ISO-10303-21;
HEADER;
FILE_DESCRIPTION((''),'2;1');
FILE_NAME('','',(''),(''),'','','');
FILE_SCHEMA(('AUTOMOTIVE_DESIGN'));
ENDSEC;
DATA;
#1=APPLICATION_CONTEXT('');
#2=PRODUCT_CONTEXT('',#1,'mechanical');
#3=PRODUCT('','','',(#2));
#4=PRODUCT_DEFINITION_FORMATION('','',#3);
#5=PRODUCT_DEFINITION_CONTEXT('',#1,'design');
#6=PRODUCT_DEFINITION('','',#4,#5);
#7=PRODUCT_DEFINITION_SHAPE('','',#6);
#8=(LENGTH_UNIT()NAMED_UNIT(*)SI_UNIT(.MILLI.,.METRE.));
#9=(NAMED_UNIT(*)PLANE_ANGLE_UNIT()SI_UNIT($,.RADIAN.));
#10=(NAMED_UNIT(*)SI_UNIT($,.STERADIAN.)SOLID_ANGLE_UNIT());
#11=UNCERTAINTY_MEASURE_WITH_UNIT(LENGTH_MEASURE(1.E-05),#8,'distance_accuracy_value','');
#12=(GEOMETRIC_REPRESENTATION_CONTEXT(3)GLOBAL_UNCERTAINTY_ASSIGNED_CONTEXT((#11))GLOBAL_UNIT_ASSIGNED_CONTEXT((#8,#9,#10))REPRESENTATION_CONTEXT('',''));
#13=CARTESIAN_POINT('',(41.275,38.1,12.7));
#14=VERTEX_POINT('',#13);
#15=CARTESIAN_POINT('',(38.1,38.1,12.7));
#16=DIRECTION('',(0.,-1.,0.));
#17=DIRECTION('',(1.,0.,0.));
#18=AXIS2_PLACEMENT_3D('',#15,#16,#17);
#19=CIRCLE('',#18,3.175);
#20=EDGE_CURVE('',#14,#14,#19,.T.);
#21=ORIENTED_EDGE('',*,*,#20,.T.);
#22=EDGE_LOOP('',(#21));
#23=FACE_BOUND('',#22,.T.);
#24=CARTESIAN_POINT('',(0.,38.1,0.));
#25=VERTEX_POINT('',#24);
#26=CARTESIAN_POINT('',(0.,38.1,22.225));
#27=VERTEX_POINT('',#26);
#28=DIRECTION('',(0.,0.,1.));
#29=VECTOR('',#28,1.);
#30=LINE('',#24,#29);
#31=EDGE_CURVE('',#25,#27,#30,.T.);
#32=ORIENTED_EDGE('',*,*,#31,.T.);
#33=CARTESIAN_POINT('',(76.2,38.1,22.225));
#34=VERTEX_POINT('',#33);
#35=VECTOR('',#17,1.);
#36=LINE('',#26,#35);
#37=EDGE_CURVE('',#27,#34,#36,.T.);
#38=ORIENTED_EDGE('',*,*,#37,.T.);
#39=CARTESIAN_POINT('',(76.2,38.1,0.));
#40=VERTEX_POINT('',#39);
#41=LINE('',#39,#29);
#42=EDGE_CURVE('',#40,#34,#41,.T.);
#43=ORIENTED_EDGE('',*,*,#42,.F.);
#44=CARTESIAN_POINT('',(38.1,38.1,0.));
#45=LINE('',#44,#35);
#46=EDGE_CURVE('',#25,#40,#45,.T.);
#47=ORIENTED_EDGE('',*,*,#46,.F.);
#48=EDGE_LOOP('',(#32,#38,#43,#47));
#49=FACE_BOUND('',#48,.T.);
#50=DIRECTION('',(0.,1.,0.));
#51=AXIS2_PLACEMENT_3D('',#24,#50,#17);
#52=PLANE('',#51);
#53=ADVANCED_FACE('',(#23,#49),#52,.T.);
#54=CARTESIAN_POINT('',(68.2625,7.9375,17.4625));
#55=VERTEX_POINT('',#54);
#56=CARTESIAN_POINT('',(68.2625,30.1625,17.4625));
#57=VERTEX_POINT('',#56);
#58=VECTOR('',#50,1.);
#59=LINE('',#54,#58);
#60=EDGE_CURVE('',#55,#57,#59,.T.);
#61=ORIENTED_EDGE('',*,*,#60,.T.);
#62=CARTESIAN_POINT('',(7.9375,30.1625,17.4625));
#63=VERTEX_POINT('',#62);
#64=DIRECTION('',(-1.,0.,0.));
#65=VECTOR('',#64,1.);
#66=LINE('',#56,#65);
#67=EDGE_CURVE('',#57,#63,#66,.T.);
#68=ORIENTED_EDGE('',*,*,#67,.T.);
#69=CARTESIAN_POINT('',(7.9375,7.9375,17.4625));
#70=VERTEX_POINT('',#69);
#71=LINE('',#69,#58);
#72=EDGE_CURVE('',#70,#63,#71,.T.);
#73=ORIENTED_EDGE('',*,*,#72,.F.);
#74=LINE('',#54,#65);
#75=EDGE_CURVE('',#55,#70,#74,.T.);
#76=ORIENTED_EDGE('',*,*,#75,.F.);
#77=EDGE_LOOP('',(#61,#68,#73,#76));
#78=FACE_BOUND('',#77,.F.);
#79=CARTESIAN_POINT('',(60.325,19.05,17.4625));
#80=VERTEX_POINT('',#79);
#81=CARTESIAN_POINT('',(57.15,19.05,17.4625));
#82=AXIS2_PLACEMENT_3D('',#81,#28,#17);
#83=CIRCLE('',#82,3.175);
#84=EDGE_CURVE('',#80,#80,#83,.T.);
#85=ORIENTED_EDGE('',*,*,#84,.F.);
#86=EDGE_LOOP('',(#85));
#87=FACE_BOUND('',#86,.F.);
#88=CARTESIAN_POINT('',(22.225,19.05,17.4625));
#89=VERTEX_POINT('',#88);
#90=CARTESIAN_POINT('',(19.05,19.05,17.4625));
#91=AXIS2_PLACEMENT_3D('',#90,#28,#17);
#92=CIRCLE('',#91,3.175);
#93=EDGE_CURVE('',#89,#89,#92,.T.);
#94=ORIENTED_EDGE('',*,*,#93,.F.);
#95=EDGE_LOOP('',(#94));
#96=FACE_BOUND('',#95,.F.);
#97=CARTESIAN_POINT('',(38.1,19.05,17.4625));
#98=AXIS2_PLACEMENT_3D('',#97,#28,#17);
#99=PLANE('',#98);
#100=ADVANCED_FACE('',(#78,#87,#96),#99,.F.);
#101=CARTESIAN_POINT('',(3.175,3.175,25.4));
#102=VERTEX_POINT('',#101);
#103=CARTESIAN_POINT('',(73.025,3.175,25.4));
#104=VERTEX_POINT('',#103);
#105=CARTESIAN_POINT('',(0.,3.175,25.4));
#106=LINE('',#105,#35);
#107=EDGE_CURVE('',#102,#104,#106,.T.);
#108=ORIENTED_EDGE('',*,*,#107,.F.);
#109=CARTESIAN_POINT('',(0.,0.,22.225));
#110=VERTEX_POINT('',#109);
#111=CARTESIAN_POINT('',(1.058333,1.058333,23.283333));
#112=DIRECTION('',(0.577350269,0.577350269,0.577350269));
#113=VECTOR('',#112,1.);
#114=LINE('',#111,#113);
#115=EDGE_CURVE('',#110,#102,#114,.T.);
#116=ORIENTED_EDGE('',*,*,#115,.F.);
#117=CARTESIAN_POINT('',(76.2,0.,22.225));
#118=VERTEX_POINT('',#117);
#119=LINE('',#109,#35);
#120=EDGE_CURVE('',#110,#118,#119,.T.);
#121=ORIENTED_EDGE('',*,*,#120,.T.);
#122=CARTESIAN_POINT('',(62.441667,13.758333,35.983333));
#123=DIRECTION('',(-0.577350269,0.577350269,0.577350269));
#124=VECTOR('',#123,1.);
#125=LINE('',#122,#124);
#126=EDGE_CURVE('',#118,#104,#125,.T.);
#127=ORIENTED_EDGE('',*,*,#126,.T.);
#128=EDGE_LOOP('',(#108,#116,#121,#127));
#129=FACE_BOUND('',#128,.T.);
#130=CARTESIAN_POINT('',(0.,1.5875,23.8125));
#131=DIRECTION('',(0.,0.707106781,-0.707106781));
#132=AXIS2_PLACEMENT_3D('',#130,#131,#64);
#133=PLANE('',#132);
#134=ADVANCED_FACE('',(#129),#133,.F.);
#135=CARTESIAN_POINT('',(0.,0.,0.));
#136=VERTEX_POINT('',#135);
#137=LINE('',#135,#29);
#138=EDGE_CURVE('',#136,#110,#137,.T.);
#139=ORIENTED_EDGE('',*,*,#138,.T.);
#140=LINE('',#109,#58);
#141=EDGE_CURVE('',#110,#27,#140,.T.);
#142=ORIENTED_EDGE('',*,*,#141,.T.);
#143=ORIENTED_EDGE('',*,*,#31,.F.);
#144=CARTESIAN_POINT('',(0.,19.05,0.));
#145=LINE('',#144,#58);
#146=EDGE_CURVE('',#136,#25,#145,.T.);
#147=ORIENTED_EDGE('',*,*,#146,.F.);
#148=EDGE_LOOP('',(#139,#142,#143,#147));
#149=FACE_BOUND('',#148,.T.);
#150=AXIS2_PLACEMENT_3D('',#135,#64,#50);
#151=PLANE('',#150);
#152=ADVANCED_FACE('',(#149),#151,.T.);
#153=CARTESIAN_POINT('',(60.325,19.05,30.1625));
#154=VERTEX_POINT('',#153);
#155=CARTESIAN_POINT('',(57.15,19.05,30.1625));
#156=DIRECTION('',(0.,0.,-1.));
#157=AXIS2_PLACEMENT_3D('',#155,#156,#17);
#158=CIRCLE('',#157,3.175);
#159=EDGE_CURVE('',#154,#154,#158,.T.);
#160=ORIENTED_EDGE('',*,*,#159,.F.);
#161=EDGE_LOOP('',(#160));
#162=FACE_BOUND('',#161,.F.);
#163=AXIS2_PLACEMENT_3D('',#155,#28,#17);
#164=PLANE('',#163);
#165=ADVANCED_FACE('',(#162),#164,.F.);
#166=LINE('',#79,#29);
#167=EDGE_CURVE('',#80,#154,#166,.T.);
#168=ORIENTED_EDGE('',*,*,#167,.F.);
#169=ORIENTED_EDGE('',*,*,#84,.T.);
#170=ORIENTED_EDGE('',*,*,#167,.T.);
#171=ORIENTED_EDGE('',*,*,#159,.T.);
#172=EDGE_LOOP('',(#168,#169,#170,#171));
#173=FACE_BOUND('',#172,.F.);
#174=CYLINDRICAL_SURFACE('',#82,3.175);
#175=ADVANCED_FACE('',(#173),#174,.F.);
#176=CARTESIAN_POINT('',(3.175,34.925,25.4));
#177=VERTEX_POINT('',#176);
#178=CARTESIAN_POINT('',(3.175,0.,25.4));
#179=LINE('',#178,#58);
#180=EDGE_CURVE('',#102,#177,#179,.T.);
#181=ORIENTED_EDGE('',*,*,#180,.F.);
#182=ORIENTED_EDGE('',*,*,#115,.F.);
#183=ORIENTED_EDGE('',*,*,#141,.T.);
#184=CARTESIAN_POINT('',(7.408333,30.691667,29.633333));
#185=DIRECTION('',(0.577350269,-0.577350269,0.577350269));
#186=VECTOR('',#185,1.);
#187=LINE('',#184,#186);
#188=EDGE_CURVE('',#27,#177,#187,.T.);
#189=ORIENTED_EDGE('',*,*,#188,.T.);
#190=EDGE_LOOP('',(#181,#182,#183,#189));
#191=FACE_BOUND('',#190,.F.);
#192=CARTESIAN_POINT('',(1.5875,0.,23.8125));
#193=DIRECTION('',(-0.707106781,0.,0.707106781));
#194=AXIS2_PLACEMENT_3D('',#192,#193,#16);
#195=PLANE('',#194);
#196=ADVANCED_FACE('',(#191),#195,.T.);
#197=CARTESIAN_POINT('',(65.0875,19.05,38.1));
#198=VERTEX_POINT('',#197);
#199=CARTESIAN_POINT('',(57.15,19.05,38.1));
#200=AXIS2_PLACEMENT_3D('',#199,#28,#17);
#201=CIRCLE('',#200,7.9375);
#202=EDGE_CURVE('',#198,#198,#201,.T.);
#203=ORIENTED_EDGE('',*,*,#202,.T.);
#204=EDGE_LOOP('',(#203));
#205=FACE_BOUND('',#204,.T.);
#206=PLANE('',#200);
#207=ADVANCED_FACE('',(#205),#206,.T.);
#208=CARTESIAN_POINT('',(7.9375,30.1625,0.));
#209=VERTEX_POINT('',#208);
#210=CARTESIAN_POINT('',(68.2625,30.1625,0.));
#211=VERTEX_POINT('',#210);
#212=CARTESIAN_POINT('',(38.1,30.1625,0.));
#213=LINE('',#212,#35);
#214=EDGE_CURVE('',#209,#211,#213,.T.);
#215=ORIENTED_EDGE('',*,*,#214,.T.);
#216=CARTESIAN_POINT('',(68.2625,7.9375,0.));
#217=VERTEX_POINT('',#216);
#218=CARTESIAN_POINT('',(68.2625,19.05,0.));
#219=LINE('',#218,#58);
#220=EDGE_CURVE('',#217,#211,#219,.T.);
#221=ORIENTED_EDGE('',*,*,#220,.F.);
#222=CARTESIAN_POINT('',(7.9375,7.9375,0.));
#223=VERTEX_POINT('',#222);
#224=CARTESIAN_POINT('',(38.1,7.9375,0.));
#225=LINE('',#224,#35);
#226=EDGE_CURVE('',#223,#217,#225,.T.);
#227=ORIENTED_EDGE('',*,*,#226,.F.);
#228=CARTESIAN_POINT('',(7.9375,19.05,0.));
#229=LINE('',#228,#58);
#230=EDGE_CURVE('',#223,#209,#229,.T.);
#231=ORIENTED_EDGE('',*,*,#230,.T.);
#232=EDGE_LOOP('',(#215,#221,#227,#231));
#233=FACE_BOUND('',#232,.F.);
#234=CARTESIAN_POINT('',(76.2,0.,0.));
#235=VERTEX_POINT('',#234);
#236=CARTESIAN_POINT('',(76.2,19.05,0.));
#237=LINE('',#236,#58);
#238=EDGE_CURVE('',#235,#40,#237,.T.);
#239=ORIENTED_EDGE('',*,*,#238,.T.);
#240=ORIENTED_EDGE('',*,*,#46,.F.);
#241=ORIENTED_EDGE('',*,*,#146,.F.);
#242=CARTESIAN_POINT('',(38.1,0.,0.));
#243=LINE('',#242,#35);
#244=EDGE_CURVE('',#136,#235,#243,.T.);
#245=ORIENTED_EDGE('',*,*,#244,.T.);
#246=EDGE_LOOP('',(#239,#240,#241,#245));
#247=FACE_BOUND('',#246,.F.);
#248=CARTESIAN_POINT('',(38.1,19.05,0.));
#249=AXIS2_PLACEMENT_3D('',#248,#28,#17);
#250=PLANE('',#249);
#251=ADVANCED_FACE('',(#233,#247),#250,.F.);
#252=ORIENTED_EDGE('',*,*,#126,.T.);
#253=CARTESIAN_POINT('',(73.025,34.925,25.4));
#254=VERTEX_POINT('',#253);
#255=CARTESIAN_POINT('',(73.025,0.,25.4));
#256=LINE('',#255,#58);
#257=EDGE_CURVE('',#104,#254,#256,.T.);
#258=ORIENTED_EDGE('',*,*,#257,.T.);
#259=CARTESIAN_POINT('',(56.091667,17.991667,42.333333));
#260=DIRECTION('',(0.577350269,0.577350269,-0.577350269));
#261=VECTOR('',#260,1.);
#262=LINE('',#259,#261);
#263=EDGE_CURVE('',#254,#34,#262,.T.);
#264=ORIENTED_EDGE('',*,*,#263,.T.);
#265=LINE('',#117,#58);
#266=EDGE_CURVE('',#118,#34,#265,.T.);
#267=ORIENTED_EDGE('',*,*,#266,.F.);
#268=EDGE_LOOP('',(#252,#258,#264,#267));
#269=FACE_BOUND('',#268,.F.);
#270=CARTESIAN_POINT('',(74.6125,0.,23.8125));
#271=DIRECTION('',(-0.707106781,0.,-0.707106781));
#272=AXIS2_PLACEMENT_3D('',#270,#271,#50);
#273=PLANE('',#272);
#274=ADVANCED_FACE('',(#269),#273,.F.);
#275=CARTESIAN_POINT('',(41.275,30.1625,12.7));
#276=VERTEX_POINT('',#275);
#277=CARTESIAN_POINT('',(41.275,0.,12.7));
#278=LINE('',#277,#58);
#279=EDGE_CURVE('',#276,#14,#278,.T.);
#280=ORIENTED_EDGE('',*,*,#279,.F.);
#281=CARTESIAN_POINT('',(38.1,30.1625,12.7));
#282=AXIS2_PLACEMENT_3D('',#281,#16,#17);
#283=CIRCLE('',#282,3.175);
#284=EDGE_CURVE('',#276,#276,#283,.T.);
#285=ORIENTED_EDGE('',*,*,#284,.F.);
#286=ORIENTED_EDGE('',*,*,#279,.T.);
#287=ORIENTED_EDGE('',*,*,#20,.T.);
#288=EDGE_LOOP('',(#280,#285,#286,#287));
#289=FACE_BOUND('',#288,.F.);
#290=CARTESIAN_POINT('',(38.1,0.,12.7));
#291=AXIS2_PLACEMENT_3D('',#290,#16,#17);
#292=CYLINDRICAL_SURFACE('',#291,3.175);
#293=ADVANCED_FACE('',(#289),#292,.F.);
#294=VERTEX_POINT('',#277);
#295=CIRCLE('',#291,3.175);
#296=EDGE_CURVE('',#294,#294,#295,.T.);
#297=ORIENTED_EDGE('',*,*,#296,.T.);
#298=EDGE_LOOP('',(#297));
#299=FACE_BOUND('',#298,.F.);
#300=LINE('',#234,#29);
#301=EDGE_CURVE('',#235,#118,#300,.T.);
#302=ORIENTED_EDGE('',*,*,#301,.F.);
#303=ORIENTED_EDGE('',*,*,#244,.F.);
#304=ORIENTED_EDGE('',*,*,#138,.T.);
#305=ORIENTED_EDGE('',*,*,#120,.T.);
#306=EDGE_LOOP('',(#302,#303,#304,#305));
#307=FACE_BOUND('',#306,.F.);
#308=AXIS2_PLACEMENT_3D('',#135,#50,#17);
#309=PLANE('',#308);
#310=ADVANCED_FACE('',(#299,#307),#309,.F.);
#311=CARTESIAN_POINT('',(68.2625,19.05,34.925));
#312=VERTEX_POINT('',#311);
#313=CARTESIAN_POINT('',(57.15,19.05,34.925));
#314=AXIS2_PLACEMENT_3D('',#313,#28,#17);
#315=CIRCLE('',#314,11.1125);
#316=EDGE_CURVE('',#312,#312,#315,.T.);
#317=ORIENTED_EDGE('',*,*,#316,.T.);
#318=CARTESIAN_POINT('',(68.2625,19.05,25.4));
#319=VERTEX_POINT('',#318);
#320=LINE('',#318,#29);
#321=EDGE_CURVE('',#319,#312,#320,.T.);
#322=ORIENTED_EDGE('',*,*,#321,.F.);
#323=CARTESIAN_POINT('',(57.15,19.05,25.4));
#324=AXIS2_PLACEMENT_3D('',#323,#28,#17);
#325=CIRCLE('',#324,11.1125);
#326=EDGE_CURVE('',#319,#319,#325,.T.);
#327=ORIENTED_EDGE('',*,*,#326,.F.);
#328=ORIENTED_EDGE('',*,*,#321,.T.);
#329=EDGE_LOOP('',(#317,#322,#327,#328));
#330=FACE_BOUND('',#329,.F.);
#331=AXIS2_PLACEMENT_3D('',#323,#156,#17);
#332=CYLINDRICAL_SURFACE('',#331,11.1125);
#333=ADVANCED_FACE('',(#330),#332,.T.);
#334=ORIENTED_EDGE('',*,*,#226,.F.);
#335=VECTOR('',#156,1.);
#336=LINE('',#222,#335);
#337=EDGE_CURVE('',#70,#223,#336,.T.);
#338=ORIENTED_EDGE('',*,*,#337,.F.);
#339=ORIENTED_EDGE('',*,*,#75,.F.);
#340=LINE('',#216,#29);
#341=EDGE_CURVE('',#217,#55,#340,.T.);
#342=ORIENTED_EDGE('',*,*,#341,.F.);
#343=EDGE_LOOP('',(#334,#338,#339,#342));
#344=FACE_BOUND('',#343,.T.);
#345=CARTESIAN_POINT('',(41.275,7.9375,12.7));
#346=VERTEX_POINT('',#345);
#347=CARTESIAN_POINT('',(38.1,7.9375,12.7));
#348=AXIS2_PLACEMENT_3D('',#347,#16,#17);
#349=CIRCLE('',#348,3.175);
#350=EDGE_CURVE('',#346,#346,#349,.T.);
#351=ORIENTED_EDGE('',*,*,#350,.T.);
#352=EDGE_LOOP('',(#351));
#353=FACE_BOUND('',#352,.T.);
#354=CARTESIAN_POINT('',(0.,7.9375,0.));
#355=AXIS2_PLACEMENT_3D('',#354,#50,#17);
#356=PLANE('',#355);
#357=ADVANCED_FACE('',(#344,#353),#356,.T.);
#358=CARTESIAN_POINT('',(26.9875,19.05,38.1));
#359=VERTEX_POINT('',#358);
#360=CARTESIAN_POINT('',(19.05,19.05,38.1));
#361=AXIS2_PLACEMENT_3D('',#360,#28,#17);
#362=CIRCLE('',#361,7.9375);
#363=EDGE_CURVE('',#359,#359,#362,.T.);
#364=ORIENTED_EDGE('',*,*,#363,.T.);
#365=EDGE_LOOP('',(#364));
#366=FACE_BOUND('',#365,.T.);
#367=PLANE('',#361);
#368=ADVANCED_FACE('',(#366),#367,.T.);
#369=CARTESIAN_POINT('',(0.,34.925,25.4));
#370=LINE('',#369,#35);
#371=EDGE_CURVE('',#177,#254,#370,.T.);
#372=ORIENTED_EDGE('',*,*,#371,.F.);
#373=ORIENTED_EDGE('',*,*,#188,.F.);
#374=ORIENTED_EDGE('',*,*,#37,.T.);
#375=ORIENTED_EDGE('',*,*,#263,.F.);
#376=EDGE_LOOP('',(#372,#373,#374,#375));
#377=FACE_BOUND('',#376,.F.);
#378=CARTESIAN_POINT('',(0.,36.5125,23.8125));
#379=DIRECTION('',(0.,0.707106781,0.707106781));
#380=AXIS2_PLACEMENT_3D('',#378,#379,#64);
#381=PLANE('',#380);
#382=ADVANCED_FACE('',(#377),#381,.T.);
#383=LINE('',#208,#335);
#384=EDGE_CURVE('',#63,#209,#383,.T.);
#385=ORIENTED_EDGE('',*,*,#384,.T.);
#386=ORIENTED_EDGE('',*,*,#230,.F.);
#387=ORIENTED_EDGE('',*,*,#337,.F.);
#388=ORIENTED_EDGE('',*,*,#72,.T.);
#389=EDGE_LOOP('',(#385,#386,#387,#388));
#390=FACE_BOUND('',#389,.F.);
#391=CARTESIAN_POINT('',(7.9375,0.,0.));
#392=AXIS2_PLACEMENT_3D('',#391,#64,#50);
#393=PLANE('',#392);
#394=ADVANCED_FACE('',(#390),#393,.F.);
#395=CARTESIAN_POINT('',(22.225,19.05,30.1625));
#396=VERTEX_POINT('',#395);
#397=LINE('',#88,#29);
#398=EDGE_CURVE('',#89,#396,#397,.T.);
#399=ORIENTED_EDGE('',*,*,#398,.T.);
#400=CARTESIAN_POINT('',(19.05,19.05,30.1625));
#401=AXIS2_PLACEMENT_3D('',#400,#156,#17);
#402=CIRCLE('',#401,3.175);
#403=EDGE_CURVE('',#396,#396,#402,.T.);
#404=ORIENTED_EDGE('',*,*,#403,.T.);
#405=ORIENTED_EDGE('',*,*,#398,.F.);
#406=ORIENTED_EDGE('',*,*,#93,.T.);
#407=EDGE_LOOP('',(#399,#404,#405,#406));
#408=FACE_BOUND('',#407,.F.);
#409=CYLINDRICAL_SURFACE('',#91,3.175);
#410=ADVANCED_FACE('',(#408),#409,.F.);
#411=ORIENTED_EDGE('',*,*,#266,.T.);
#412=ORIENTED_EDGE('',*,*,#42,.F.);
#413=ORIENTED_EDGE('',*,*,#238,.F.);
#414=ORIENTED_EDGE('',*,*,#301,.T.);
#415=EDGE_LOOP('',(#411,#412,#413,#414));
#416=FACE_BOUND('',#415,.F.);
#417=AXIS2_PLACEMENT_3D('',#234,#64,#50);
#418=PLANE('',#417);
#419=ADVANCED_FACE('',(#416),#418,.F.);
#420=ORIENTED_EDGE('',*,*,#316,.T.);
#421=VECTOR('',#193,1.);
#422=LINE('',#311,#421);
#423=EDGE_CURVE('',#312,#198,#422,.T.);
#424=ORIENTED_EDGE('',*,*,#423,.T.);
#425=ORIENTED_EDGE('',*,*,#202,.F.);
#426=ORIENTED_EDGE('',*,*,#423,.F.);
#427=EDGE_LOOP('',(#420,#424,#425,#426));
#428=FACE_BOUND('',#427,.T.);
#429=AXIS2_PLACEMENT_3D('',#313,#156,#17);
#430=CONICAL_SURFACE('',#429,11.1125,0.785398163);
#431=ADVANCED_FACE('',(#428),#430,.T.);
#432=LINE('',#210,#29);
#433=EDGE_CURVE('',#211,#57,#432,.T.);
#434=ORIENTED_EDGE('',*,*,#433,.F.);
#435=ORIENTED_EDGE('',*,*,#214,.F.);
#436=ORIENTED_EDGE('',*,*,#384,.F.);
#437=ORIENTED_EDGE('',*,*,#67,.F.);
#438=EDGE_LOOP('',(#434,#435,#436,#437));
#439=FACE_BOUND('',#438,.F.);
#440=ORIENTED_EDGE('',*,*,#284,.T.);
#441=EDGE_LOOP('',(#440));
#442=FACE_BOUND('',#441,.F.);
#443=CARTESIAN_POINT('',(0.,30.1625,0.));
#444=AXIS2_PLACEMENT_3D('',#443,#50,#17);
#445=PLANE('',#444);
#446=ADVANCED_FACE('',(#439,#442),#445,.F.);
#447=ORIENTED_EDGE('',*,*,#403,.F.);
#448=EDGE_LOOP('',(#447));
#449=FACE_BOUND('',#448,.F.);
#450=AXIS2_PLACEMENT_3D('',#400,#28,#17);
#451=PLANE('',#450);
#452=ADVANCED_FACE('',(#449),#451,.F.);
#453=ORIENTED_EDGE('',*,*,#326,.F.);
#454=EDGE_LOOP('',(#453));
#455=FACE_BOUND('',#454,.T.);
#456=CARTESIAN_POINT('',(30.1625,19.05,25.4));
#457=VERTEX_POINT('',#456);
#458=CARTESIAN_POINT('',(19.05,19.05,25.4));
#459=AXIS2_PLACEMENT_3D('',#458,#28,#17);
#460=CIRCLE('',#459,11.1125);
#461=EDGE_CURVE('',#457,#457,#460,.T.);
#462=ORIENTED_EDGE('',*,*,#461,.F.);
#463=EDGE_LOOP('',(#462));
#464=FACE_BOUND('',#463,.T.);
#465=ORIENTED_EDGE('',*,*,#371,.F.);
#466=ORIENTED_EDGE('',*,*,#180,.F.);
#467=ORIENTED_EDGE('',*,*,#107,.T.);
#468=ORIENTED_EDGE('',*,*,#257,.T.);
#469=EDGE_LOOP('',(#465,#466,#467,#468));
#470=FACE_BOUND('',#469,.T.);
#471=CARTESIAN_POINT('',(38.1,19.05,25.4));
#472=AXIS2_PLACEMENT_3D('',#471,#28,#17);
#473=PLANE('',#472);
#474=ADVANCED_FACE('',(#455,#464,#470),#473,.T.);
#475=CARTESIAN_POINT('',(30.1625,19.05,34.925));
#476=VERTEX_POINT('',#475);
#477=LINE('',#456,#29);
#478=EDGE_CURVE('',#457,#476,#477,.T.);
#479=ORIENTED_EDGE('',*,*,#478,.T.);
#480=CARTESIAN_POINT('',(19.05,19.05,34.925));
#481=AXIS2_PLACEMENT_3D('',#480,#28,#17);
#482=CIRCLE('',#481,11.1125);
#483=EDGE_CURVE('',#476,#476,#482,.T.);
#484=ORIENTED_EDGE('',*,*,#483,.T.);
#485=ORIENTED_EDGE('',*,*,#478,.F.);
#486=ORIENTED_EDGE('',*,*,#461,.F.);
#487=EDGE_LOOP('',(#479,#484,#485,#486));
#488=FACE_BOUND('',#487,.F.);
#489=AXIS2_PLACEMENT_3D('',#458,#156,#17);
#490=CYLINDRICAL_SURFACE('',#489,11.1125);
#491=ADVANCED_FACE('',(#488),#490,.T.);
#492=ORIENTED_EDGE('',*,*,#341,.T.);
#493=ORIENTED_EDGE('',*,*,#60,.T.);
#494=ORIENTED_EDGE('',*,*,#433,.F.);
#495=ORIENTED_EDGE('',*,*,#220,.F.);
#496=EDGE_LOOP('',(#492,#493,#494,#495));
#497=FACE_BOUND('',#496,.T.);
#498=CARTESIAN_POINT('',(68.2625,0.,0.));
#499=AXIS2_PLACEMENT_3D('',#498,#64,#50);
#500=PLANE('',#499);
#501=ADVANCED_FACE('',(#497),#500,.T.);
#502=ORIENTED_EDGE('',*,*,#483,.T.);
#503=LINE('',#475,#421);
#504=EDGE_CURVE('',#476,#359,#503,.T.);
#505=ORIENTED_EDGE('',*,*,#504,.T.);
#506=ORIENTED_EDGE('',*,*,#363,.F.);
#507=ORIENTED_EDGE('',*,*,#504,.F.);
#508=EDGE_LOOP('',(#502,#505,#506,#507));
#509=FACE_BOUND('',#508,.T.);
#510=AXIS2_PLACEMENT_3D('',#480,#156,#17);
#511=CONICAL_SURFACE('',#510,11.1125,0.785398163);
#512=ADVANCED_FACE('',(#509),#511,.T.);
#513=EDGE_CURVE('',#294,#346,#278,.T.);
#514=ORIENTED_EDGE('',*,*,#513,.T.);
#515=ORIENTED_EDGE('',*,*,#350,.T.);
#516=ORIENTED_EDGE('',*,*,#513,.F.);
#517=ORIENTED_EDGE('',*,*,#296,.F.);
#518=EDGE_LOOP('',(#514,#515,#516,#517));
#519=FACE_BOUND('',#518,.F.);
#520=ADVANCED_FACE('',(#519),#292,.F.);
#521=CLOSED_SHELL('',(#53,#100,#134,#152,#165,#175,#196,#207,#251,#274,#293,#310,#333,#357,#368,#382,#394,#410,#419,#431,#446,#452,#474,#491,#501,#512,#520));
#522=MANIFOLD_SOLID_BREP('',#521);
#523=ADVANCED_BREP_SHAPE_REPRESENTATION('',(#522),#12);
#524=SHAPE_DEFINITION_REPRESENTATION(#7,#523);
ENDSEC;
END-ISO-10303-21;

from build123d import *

# Parameters (mm, degrees)
F0_W     = 76.2
F0_H     = 38.1
F1_DEPTH = 25.4
F2_R     = 11.1125
F3_DEPTH = 12.7
F4_SIZE  = 3.175
F5_T     = 7.9375
F6_R     = 3.175
F7_DEPTH = 50.8


# Not quite as in the source:
# - a shell that OpenCascade refuses in one call is made with other operations: the cavity is built on its own and cut out


with BuildPart() as f1:
    # F0 (on Top) → F1 (new body)
    with BuildSketch(Plane.XY):
        with Locations((38.1, 19.05)):
            Rectangle(F0_W, F0_H)
    extrude(amount=F1_DEPTH)

    # F2 (on face) → F3 (join)
    with BuildSketch(Plane.XY.offset(25.4)):
        with Locations((19.05, 19.05)):
            Circle(F2_R)
        with Locations((57.15, 19.05)):
            Circle(F2_R)
    extrude(amount=F3_DEPTH)

    # F4
    f4_edges = [f1.edges().sort_by_distance(p)[0] for p in [
        (7.9375, 19.05, 38.1),
        (0, 19.05, 25.4),
        (38.1, 0, 25.4),
        (76.2, 19.05, 25.4),
        (38.1, 38.1, 25.4),
        (46.0375, 19.05, 38.1),
    ]]
    chamfer(f4_edges, length=F4_SIZE)

    # F5: shell of thickness 7.9375, made by hand


with BuildPart() as f5_core1:
    # F5_t2: copy of F1
    add(f1.part)

    # the walls: a layer under each face that stays
    f5_faces = [f5_core1.faces().sort_by_distance(p)[0] for p in [
        (0, 19.05, 11.1125),
        (38.1, 38.1, 11.1125),
        (1.5875, 19.05, 23.8125),
        (38.1, 0, 11.1125),
        (76.2, 19.05, 11.1125),
        (38.1, 36.5125, 23.8125),
        (38.1, 19.05, 25.4),
        (38.1, 1.5875, 23.8125),
        (74.6125, 19.05, 23.8125),
        (7.9375, 19.05, 30.1625),
        (46.0375, 19.05, 30.1625),
        (9.525, 19.05, 36.5125),
        (47.625, 19.05, 36.5125),
        (19.05, 19.05, 38.1),
        (57.15, 19.05, 38.1),
    ]]
    thicken(f5_faces, amount=-F5_T, mode=Mode.SUBTRACT)

    # F5_s3 → F5_t4 (revolve, cut)
    with BuildSketch(Plane.XZ.offset(-19.05)):
        Polygon((30.241875, 25.479375), (30.1625, 17.4625), (22.225, 17.4625), (22.225, 25.4), align=None)
    revolve(axis=Axis((19.05, 19.05, 25.4), (0, 0, 1)), mode=Mode.SUBTRACT)

    # F5_s5 → F5_t6 (revolve, cut)
    with BuildSketch(Plane.XZ.offset(-19.05)):
        Polygon((68.341875, 25.479375), (68.2625, 17.4625), (60.325, 17.4625), (60.325, 25.4), align=None)
    revolve(axis=Axis((57.15, 19.05, 25.4), (0, 0, 1)), mode=Mode.SUBTRACT)


with BuildPart() as f1_1:
    add(f1.part)

    # what is left inside the walls is the cavity
    f5_cavity = [f5_core1.part.solids().sort_by_distance(p)[0] for p in [
        (38.1, 15.345833, 0.079375),
    ]]
    add(f5_cavity, mode=Mode.SUBTRACT)

    # F6 (on face) → F7 (cut)
    with BuildSketch(Plane.XZ):
        with Locations((38.1, 12.7)):
            Circle(F6_R)
    extrude(amount=-F7_DEPTH, mode=Mode.SUBTRACT)


solid = f1_1.part
